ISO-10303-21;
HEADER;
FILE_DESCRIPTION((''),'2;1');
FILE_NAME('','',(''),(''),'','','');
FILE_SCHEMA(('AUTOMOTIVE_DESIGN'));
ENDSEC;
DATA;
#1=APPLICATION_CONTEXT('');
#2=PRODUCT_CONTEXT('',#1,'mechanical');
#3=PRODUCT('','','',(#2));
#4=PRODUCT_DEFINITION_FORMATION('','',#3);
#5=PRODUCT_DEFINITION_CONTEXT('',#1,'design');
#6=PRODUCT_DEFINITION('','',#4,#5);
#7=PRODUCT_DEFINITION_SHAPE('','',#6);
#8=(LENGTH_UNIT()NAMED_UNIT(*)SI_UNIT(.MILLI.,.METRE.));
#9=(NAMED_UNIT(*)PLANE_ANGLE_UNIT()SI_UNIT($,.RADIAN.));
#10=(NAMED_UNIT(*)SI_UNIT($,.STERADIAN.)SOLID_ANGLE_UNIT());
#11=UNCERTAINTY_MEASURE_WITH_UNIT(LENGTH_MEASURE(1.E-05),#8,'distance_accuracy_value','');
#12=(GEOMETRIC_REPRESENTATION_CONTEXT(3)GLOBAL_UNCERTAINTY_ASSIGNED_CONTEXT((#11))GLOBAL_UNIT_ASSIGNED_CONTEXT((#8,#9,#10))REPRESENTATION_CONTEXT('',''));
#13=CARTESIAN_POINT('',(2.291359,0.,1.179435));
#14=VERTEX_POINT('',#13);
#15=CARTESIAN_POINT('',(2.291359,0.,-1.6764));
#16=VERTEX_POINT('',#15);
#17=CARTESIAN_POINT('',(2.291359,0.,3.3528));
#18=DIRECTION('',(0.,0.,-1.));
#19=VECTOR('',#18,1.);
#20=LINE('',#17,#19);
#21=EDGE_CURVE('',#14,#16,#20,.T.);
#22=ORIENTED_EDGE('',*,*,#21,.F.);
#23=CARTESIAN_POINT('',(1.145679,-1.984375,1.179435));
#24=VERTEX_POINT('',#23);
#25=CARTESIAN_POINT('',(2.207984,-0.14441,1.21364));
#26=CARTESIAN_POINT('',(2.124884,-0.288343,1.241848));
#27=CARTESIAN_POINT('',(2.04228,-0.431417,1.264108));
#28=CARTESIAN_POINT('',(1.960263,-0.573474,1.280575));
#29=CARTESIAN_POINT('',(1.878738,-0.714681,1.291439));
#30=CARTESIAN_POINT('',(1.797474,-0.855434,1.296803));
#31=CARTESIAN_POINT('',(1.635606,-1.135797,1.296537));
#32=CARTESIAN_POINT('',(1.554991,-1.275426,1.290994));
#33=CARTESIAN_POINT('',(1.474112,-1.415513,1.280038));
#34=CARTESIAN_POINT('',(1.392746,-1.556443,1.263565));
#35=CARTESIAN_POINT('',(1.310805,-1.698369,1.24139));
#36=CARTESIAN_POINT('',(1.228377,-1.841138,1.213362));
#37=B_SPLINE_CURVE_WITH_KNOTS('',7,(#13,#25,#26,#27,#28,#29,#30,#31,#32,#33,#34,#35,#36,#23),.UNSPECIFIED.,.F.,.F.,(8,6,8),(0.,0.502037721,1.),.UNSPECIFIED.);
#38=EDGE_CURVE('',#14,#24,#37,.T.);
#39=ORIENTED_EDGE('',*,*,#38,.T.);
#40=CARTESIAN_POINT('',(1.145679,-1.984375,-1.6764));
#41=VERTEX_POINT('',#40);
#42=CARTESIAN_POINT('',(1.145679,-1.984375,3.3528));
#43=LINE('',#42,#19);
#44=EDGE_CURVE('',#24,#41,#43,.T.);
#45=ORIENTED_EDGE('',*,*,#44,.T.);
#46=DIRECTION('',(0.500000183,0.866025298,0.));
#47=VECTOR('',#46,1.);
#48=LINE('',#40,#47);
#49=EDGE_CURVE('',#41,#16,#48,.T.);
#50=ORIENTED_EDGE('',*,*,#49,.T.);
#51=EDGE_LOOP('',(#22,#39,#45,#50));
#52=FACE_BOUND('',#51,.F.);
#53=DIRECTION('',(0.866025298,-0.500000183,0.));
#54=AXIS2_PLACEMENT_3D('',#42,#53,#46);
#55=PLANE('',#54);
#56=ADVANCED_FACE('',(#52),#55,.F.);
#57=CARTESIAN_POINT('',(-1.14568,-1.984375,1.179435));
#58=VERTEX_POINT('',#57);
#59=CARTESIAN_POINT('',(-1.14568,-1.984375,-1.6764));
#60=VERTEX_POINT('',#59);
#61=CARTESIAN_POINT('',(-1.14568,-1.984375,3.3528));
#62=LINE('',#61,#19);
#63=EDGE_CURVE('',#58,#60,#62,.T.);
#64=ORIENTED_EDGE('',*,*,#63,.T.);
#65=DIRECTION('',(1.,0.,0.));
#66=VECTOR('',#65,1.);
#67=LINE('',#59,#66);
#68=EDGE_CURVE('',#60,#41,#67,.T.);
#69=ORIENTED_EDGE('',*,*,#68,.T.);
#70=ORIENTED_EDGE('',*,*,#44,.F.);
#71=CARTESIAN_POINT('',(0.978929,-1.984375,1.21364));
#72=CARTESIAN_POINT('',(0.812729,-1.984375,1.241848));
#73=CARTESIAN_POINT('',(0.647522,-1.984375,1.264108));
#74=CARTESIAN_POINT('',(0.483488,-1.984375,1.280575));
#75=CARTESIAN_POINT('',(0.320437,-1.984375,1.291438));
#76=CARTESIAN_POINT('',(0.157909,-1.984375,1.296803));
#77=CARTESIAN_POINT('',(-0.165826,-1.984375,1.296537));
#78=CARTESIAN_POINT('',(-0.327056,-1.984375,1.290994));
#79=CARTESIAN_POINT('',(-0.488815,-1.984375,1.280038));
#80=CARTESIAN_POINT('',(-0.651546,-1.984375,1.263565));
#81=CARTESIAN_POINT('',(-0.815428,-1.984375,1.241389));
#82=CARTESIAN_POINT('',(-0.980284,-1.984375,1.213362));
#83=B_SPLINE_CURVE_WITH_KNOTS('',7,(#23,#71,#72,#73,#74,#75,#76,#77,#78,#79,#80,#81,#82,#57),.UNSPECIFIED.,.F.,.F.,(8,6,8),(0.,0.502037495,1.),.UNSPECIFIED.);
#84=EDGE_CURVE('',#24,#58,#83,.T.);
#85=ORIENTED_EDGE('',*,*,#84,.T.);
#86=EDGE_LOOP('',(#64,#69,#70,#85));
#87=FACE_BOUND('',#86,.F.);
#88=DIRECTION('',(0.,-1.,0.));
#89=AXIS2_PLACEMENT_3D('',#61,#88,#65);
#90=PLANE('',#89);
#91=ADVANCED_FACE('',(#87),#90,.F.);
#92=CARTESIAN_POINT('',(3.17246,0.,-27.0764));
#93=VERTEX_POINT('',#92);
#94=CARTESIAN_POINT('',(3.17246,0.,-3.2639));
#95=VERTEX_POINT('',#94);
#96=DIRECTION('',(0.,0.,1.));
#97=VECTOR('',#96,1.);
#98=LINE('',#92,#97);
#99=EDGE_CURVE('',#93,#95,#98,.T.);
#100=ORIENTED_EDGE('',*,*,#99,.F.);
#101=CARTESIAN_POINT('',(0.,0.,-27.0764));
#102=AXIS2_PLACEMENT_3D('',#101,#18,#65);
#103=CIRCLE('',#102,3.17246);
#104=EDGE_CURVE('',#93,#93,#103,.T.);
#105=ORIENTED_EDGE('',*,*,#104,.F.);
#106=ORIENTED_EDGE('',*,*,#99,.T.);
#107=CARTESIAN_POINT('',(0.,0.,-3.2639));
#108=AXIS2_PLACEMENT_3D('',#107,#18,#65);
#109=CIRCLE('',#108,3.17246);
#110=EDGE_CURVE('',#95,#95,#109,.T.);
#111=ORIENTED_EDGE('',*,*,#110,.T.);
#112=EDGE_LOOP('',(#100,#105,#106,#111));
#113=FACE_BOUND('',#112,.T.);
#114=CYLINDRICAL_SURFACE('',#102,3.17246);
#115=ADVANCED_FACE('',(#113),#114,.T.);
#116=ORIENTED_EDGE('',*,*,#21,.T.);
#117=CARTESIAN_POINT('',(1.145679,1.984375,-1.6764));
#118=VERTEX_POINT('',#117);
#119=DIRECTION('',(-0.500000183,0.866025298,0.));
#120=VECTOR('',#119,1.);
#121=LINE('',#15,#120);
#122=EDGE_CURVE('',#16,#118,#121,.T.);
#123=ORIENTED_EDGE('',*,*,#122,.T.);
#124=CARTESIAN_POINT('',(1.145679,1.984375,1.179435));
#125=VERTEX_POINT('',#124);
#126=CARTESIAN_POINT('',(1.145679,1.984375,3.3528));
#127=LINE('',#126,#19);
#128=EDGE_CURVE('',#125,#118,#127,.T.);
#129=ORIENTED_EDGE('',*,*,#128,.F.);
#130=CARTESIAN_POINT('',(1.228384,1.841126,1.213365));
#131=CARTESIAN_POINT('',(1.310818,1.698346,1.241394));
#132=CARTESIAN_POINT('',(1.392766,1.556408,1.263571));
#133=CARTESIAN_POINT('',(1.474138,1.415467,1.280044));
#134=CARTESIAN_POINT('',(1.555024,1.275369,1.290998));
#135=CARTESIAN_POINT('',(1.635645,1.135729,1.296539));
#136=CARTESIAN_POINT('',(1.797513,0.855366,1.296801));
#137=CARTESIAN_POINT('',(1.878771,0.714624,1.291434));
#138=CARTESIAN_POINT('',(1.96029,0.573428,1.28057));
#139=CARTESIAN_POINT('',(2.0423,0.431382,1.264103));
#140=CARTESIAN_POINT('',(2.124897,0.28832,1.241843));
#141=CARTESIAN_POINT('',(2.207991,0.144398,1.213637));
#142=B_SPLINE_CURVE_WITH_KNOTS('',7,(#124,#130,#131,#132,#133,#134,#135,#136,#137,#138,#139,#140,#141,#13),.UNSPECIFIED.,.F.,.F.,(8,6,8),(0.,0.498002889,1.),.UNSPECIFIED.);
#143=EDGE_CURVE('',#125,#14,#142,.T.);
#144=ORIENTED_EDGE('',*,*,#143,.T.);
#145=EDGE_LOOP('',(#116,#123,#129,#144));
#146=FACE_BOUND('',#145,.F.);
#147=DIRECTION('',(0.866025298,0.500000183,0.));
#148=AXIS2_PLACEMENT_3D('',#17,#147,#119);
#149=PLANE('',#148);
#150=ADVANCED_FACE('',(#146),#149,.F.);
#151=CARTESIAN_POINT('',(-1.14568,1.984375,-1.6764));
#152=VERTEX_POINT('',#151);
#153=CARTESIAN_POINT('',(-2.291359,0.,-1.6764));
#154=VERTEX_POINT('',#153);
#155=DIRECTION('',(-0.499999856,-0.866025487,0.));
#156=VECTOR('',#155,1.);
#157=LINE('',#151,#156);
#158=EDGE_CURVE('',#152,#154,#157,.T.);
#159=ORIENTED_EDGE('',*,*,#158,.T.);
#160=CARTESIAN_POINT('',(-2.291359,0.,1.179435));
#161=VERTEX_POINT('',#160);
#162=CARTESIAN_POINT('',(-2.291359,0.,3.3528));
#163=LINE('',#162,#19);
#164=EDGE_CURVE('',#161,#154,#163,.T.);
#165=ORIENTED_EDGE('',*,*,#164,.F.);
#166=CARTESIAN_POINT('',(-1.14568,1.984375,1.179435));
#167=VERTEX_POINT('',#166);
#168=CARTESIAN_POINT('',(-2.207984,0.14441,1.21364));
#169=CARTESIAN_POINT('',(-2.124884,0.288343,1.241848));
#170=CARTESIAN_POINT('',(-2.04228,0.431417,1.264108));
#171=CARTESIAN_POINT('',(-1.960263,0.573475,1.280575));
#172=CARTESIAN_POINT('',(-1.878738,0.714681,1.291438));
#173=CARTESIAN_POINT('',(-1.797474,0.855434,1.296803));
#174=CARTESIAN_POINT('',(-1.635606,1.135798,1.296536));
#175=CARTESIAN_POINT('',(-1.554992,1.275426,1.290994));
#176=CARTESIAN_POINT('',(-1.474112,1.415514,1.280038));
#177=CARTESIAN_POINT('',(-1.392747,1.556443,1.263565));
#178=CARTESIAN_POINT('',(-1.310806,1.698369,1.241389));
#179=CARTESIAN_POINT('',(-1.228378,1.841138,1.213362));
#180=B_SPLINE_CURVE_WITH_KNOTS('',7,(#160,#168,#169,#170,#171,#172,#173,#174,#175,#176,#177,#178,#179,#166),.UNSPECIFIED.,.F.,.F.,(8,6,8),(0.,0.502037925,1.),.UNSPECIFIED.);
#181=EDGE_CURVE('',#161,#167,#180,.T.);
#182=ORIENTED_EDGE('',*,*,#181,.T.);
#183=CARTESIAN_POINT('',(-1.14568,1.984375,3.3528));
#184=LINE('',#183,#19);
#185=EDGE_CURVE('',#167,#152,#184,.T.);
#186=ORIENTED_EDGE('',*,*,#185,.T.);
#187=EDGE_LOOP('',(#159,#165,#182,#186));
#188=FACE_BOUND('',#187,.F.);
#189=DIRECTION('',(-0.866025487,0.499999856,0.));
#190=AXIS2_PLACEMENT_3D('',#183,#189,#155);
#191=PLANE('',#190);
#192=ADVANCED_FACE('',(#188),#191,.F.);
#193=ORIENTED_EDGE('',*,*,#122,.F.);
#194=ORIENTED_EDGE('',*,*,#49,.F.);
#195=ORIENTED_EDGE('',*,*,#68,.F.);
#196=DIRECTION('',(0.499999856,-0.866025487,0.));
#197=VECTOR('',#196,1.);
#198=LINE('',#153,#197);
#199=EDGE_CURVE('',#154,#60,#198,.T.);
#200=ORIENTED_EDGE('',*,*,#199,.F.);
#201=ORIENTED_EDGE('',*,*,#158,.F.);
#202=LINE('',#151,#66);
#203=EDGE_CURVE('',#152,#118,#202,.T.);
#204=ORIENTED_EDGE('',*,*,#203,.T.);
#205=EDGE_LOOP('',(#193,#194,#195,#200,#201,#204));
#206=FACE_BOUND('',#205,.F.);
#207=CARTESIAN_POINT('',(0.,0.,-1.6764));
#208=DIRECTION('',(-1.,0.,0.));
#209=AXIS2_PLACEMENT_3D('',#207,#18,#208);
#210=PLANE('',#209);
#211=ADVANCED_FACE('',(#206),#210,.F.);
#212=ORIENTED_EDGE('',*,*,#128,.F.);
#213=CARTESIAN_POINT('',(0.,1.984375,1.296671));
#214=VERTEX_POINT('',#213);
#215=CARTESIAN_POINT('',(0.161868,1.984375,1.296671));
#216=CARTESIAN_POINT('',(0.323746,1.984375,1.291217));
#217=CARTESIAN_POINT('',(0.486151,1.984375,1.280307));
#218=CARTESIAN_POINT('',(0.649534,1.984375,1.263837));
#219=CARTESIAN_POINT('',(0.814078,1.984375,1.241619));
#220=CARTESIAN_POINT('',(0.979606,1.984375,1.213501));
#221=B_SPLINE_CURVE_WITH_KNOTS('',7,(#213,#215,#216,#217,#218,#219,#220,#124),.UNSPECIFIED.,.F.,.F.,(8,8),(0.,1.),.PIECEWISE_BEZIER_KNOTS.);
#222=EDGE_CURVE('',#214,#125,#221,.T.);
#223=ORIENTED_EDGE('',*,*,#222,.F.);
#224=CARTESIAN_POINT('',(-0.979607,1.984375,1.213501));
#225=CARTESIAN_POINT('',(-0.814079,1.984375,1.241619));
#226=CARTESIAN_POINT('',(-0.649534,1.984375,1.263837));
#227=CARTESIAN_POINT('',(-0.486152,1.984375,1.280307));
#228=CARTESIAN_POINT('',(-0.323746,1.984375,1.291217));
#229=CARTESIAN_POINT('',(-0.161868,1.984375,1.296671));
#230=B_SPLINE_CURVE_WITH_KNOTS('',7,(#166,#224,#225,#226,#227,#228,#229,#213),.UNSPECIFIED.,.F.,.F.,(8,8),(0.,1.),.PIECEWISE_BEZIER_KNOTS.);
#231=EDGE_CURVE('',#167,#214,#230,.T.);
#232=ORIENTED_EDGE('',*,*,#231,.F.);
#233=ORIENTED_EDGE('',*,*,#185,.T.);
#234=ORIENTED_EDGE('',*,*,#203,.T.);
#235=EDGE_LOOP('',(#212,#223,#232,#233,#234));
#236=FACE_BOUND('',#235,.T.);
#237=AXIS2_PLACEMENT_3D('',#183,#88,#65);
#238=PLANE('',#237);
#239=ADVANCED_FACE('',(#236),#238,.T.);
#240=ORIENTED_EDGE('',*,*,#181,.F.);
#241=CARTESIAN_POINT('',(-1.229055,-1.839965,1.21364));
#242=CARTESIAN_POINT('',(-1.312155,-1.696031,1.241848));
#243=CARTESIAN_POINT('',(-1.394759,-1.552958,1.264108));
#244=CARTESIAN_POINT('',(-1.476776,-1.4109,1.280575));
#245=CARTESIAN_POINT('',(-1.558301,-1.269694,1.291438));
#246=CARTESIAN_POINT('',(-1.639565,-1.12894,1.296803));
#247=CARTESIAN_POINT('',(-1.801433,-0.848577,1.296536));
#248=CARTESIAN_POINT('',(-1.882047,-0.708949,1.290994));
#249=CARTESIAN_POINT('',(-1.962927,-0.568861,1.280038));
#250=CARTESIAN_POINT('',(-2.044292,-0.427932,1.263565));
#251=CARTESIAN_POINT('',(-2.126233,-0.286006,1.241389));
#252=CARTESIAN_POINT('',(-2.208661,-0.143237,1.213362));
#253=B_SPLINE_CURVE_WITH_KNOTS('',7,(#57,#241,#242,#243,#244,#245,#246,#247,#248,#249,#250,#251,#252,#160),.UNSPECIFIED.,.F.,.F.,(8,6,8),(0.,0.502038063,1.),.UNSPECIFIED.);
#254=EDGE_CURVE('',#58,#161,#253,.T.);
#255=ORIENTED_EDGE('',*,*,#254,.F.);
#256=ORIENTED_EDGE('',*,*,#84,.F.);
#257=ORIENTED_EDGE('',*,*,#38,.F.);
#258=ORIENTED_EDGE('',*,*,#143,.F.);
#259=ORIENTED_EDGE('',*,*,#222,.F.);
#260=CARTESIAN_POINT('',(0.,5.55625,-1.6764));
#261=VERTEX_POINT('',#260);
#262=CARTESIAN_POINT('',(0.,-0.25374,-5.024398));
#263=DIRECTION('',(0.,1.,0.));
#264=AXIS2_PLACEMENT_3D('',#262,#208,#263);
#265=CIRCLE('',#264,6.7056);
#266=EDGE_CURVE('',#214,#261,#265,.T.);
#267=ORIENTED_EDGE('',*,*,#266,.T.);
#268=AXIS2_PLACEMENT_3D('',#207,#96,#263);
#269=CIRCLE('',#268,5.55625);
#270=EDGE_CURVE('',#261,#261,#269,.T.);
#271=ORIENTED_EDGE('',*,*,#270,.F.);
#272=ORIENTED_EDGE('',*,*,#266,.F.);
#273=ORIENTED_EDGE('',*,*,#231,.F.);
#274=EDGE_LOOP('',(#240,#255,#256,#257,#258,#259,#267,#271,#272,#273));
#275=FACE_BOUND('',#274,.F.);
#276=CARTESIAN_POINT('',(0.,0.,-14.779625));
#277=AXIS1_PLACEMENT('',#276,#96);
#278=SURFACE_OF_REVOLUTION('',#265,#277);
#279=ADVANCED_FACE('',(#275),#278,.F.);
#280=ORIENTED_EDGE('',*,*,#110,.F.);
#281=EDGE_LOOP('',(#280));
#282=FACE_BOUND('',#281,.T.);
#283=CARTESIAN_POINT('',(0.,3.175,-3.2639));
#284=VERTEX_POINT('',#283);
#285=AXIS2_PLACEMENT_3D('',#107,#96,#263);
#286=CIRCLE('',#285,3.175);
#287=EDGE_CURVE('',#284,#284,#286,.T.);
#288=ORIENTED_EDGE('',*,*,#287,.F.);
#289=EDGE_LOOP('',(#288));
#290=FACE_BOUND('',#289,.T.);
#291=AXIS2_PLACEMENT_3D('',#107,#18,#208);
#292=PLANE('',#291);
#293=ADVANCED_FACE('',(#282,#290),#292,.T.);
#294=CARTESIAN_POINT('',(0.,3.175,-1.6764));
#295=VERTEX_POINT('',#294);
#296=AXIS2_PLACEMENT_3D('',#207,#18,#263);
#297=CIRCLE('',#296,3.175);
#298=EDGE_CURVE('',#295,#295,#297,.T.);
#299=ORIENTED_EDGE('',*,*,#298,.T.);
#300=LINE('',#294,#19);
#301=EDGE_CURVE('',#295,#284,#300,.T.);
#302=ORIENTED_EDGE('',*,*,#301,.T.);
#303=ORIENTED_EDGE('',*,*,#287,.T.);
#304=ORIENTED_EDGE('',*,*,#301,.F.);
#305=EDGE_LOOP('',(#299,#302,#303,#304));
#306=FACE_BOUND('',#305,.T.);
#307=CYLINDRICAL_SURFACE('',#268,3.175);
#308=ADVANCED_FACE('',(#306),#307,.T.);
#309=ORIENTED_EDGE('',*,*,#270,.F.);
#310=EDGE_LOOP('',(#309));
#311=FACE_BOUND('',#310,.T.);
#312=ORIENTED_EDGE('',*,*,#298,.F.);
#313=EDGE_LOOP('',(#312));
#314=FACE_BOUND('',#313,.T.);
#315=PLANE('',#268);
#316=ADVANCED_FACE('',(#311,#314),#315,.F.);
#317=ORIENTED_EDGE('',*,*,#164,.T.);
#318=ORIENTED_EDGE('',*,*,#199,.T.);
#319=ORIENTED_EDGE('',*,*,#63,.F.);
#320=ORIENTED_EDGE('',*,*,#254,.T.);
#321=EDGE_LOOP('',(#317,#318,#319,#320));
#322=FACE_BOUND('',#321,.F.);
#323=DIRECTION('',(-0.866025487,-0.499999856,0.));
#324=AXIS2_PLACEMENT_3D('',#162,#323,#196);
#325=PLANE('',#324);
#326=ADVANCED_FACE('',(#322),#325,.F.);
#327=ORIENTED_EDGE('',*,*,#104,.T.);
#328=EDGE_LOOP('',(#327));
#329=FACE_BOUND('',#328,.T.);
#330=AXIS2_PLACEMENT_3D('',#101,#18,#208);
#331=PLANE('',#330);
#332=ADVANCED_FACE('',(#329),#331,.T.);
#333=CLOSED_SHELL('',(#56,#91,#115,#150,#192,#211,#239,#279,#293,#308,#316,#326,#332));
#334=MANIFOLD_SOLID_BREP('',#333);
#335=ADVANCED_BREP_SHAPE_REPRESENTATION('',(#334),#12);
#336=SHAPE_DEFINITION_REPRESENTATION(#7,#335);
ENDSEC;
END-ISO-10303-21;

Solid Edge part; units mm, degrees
sketch "Sketch1" plane through (0, 0, 0) normal (1, 0, 0) x (0, 1, 0)
  line L0 (0, -1.6764) -> (0, 1.6764)
  arc A0 (0, 1.6764) -> (5.55625, -1.6764) centre (-0.25374, -5.024398) cw
  line L1 (0, -1.6764) -> (5.55625, -1.6764)
  dimension "D1" = 3.3528
  dimension "D2" = 6.7056
revolve "RevolvedProtrusion1" add sketch "Sketch1" angle 360 about axis through (0, 0, -14.779625) along (0, 0, 1)
sketch "Sketch2" plane through (0, 0, -1.6764) normal (0, 0, -1) x (0, 1, 0)
  circle A0 centre (0, 0) radius 3.175
  dimension "D1" = 6.35
extrude "Protrusion1" add sketch "Sketch2" along normal blind 25.4
sketch "Sketch3" plane through (0, 0, -27.0764) normal (0, 0, -1) x (1, 0, 0)
  circle A0 centre (0, 0) radius 3.17246
  dimension "D1" = 0.0025
extrude "Cutout1" cut sketch "Sketch3" against normal blind 23.8125 flip side to cut
sketch "Sketch4" plane through (-0.603226, 0.360624, 3.3528) normal (0, 0, 1) x (1, 0, 0)
  line L0 (-0.542454, 1.623751) -> (1.748905, 1.623751)
  line L1 (2.894585, -0.360624) -> (1.748905, 1.623751)
  line L2 (1.748905, -2.344999) -> (2.894585, -0.360624)
  line L3 (-0.542454, -2.344999) -> (1.748905, -2.344999)
  line L4 (-1.688133, -0.360624) -> (-0.542454, -2.344999)
  line L5 (-0.542454, 1.623751) -> (-1.688133, -0.360624)
extrude "ExtrudedCutout_11" cut sketch "Sketch4" against normal blind 5.0292
properties part number "118596"
